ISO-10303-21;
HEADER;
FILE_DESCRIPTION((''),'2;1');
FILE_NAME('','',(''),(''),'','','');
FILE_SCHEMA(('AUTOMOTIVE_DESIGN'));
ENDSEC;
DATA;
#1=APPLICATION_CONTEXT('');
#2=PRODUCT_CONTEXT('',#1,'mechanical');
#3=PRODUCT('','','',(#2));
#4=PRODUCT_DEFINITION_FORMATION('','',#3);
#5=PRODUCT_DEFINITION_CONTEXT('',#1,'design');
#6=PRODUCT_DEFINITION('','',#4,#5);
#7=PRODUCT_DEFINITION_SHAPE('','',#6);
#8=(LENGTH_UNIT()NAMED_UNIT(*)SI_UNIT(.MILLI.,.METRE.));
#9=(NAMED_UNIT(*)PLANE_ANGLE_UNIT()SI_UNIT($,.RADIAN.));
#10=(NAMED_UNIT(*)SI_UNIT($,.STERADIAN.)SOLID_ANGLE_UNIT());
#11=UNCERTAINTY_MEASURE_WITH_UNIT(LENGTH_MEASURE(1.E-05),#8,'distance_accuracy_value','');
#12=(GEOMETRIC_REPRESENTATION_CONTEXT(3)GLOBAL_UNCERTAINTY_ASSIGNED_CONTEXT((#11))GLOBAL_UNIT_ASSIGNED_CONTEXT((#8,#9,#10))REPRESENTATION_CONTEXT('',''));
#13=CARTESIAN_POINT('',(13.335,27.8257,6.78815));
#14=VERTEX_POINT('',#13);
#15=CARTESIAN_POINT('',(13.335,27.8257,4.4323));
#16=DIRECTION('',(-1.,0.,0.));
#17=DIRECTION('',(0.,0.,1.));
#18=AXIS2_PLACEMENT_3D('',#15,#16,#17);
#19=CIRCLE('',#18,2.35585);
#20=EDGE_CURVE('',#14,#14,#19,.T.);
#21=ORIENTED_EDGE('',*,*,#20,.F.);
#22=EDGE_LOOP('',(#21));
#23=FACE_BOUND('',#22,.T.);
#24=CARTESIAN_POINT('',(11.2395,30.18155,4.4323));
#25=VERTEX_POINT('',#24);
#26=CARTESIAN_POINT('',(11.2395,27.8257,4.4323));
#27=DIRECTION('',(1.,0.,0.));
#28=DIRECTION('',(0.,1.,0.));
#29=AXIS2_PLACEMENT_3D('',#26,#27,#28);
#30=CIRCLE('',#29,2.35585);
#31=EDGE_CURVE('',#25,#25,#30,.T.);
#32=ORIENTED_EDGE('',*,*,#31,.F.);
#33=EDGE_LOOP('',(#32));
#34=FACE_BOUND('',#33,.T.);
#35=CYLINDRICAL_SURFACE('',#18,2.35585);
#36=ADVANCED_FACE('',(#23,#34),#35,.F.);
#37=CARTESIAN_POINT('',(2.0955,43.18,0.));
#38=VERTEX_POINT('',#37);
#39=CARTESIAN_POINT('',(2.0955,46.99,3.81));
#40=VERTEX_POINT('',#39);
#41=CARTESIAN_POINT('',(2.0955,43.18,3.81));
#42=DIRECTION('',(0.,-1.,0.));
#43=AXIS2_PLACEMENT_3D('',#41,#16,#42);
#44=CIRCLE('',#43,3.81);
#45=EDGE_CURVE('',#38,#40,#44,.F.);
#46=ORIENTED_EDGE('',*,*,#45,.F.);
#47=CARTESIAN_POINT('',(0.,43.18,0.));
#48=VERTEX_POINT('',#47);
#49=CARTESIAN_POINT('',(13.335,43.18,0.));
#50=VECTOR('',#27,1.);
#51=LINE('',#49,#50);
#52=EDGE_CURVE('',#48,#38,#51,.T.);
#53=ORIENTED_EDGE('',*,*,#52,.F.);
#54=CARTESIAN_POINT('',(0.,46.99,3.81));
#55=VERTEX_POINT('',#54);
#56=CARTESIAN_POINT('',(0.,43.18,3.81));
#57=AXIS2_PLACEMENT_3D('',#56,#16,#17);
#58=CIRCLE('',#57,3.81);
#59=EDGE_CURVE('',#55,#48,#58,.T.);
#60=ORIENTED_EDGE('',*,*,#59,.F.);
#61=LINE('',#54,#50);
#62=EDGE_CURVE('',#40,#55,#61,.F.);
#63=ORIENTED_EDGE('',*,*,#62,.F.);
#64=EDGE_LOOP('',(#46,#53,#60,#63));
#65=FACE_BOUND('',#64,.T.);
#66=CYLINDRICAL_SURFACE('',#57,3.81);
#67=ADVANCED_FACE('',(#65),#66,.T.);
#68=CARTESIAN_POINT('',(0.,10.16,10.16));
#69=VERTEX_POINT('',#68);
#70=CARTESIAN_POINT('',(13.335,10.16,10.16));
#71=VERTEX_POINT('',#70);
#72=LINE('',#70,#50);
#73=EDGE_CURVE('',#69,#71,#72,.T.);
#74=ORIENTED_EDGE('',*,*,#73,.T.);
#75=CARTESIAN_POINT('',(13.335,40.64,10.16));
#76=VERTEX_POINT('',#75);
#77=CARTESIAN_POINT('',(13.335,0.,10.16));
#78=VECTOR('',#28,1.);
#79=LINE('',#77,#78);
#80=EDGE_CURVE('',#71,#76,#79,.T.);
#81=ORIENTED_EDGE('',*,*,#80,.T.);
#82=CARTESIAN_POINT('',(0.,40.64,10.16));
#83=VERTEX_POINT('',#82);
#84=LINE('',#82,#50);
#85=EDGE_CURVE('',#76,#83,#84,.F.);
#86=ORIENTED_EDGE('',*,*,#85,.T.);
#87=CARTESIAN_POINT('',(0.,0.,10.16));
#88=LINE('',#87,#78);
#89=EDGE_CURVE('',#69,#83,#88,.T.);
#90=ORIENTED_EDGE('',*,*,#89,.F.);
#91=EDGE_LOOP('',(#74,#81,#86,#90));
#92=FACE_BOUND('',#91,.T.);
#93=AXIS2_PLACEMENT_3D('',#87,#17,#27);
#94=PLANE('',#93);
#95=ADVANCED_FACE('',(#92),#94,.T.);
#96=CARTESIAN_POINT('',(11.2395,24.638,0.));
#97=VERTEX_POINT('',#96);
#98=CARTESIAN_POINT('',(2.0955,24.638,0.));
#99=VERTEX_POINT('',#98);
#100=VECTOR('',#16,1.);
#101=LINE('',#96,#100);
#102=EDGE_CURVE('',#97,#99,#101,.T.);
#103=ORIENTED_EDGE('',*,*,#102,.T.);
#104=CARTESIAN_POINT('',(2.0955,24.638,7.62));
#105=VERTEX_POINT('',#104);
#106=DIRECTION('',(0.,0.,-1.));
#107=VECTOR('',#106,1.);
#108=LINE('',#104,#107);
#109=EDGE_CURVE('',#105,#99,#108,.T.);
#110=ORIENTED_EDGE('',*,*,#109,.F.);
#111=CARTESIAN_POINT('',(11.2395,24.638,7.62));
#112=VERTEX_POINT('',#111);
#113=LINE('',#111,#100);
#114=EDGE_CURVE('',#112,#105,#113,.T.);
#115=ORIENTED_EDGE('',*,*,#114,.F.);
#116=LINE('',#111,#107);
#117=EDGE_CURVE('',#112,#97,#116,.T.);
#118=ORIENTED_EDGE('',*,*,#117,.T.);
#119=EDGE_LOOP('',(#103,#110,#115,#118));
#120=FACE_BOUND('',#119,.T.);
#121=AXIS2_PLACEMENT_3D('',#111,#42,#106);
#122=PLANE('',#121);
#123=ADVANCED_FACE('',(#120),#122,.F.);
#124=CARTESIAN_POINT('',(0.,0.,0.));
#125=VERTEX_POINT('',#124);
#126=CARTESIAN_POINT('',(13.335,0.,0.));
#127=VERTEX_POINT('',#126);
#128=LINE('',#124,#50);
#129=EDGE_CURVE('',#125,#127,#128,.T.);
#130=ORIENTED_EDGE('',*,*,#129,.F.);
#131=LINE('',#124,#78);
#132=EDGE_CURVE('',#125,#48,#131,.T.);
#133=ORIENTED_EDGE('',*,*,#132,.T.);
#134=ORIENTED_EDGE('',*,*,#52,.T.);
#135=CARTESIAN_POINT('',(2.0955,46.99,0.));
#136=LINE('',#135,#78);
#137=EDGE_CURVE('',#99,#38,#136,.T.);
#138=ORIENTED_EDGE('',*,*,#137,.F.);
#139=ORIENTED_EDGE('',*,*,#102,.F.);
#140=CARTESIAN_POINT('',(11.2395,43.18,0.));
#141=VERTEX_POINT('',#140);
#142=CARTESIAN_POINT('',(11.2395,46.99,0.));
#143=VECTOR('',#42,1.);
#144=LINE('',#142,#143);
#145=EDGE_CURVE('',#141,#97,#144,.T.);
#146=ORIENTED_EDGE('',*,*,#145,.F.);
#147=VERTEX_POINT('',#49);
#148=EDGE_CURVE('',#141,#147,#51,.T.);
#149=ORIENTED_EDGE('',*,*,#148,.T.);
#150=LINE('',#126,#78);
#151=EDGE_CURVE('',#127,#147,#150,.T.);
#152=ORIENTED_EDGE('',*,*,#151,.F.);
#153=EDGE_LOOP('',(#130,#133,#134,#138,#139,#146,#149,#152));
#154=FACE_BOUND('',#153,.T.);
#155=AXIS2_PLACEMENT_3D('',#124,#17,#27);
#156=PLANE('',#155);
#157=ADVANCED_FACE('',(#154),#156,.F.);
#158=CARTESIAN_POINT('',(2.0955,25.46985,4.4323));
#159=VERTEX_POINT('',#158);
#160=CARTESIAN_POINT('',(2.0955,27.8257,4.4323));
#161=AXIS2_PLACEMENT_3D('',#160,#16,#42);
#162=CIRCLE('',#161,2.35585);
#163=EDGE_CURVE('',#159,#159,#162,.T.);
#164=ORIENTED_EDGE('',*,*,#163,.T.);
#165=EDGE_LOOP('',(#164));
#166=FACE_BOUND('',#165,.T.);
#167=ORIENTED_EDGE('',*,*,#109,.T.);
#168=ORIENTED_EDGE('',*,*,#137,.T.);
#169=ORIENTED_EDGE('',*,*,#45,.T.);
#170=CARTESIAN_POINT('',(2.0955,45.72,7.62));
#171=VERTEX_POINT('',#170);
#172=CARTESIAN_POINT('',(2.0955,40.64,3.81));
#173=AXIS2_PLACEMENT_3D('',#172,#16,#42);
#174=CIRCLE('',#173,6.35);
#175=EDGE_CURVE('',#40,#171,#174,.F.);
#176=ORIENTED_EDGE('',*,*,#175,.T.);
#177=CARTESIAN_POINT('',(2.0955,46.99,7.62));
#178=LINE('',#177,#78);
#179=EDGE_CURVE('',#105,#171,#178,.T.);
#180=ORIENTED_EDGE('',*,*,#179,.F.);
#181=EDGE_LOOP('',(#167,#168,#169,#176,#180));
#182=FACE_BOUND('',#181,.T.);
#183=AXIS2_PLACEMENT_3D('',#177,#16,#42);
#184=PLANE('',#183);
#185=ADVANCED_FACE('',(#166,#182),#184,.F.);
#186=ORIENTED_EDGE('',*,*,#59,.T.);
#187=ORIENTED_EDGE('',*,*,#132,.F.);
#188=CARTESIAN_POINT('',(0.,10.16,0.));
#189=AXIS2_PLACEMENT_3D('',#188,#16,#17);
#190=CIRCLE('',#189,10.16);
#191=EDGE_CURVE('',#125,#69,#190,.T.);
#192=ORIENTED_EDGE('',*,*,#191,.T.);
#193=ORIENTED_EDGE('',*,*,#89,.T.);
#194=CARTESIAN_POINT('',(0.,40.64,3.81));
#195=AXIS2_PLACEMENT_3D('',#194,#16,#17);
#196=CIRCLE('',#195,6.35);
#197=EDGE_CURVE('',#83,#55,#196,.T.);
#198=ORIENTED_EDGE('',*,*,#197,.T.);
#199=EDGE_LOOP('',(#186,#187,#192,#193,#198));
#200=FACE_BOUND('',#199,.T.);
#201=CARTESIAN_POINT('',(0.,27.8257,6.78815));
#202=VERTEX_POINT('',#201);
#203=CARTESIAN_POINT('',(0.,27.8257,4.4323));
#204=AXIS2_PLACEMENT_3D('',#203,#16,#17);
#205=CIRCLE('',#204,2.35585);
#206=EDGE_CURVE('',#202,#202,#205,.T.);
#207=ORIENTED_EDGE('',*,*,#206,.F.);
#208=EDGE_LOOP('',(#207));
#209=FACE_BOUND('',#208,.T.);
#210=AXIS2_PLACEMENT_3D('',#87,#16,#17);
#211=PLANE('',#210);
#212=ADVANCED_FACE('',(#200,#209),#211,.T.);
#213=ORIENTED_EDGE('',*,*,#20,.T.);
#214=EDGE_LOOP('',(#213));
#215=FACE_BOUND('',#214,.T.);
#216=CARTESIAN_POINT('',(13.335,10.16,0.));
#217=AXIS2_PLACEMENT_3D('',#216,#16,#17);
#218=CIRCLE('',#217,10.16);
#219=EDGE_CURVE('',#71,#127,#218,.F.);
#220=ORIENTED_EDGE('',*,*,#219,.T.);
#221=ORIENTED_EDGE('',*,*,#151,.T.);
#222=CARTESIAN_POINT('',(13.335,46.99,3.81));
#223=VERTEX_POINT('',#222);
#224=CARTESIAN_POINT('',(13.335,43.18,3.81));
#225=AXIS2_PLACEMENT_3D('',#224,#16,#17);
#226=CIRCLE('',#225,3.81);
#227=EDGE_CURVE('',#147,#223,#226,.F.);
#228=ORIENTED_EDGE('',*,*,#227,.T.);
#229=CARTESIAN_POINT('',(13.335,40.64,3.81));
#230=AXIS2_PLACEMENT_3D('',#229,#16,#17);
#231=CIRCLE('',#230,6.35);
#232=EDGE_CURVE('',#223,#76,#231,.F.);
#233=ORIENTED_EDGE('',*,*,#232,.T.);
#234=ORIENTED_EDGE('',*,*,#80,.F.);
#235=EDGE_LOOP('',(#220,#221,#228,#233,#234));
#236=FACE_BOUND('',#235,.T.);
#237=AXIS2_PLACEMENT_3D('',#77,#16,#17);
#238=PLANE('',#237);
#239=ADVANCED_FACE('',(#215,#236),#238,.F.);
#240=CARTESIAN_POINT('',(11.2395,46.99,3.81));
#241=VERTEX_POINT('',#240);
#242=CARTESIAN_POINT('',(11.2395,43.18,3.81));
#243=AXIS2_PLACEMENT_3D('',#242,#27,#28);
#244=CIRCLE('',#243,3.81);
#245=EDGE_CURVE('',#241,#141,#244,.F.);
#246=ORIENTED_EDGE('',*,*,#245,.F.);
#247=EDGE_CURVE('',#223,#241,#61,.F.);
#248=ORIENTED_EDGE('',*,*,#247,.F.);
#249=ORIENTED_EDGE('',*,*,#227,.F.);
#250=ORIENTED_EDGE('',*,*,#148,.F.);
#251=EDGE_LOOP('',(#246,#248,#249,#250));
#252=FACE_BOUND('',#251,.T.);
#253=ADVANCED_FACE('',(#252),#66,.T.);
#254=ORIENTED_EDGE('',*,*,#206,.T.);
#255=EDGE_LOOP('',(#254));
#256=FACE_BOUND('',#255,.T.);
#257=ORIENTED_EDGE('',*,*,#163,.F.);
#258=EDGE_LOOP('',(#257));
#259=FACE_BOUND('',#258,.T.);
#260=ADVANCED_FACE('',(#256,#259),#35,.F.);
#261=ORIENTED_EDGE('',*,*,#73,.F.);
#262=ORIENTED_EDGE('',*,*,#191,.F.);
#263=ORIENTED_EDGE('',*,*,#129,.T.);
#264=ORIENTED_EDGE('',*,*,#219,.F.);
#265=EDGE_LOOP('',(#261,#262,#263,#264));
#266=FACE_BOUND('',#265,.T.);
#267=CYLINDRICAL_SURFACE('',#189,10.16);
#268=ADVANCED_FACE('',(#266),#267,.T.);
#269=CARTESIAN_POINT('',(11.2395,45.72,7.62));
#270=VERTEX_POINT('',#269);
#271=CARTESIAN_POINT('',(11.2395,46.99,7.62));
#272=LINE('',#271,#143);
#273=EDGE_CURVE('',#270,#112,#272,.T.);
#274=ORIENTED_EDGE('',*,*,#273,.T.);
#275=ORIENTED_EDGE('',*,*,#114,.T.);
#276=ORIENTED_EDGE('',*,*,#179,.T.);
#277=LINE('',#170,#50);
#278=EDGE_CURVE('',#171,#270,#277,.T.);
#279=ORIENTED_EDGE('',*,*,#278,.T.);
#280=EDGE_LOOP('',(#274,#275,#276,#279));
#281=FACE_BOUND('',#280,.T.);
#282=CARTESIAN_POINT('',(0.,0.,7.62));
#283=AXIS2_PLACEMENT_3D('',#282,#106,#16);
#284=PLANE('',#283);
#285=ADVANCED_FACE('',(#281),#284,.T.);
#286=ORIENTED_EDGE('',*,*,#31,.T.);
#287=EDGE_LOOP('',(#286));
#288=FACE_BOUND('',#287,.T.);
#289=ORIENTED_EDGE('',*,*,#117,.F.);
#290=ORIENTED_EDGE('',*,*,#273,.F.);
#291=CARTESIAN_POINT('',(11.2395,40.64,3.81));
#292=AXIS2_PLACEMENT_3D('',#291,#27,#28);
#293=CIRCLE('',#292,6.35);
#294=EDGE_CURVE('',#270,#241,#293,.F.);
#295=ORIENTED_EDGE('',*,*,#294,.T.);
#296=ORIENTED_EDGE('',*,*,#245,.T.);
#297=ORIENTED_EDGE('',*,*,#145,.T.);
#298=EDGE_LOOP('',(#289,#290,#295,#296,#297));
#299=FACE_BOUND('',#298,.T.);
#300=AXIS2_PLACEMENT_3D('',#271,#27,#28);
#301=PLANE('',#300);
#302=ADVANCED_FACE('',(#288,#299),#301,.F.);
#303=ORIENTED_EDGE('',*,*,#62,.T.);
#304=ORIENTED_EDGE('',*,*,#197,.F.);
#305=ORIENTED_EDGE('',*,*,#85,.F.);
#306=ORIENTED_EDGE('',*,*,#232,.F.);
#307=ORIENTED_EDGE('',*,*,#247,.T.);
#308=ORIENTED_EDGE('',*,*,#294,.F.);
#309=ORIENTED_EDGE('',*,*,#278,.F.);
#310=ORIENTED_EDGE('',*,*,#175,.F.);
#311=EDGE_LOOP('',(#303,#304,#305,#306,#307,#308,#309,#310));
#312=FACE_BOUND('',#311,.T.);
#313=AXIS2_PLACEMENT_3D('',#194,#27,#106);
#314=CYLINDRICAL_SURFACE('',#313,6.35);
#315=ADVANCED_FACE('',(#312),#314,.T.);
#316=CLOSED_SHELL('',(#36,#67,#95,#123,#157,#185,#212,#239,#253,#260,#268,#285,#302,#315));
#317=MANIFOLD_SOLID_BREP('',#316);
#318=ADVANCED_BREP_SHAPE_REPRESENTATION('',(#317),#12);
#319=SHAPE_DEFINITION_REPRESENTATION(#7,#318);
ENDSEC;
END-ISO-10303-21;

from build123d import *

# Parameters (mm, degrees)
SKETCH1_W               = 13.335
SKETCH1_H               = 46.99
BOSS_EXTRUDE1_DEPTH     = 10.16
FILLET5_R               = 3.81
SKETCH2_W               = 9.144
SKETCH2_H               = 22.352
CUT_EXTRUDE1_DEPTH      = 7.62
CUT_EXTRUDE2_DEPTH      = 50.890960354
CUT_EXTRUDE2_DEPTH_BACK = 50.890960354
SKETCH3_R               = 2.35585
FILLET4_R               = 6.35
FILLET6_R               = 10.16


# Some blends are built 0.0001 mm under size
with BuildPart() as part:
    # Sketch1 → Boss-Extrude1 (new body)
    with BuildSketch(Plane.XY):
        with Locations((6.6675, 23.495)):
            Rectangle(SKETCH1_W, SKETCH1_H)
    extrude(amount=BOSS_EXTRUDE1_DEPTH)

    # Fillet5
    fillet5_edges = [part.edges().sort_by_distance(p)[0] for p in [
        (6.6675, 46.99, 0),
    ]]
    fillet(fillet5_edges, radius=FILLET5_R)

    # Sketch2 → Cut-Extrude1 (cut)
    with BuildSketch(Plane(origin=(0, 0, 0), x_dir=(-1, 0, 0), z_dir=(0, 0, -1))):
        with Locations((-6.6675, 35.814)):
            Rectangle(SKETCH2_W, SKETCH2_H)
    extrude(amount=-CUT_EXTRUDE1_DEPTH, mode=Mode.SUBTRACT)

    # Sketch3 → Cut-Extrude2 (cut, two sides: drawn at the far end of the back side and taken through both)
    with BuildSketch(Plane.ZY.offset(-CUT_EXTRUDE2_DEPTH_BACK)):
        with Locations((4.4323, 27.8257)):
            Circle(SKETCH3_R)
    extrude(amount=CUT_EXTRUDE2_DEPTH + CUT_EXTRUDE2_DEPTH_BACK, mode=Mode.SUBTRACT)

    # Fillet4
    # the kernel refuses this fillet: 6.35 mm, written as the material it takes off along each edge
    with BuildSketch(Plane(origin=(29.21, 46.99, 10.16), x_dir=(0, 0, -1), z_dir=(-1, 0, 0))) as fillet4_piece_1:
        with BuildLine():
            CenterArc((FILLET4_R, FILLET4_R), FILLET4_R, 180, 90)
            Line((0, FILLET4_R), (0, 0))
            Line((0, 0), (FILLET4_R, 0))
        make_face()
    extrude(amount=45.085, mode=Mode.SUBTRACT)

    # Fillet6
    fillet6_edges = [part.edges().sort_by_distance(p)[0] for p in [
        (6.6675, 0, 10.16),
    ]]
    fillet(fillet6_edges, radius=FILLET6_R - 0.0001)  # a hair under: the kernel refuses the full size


solid = part.part
